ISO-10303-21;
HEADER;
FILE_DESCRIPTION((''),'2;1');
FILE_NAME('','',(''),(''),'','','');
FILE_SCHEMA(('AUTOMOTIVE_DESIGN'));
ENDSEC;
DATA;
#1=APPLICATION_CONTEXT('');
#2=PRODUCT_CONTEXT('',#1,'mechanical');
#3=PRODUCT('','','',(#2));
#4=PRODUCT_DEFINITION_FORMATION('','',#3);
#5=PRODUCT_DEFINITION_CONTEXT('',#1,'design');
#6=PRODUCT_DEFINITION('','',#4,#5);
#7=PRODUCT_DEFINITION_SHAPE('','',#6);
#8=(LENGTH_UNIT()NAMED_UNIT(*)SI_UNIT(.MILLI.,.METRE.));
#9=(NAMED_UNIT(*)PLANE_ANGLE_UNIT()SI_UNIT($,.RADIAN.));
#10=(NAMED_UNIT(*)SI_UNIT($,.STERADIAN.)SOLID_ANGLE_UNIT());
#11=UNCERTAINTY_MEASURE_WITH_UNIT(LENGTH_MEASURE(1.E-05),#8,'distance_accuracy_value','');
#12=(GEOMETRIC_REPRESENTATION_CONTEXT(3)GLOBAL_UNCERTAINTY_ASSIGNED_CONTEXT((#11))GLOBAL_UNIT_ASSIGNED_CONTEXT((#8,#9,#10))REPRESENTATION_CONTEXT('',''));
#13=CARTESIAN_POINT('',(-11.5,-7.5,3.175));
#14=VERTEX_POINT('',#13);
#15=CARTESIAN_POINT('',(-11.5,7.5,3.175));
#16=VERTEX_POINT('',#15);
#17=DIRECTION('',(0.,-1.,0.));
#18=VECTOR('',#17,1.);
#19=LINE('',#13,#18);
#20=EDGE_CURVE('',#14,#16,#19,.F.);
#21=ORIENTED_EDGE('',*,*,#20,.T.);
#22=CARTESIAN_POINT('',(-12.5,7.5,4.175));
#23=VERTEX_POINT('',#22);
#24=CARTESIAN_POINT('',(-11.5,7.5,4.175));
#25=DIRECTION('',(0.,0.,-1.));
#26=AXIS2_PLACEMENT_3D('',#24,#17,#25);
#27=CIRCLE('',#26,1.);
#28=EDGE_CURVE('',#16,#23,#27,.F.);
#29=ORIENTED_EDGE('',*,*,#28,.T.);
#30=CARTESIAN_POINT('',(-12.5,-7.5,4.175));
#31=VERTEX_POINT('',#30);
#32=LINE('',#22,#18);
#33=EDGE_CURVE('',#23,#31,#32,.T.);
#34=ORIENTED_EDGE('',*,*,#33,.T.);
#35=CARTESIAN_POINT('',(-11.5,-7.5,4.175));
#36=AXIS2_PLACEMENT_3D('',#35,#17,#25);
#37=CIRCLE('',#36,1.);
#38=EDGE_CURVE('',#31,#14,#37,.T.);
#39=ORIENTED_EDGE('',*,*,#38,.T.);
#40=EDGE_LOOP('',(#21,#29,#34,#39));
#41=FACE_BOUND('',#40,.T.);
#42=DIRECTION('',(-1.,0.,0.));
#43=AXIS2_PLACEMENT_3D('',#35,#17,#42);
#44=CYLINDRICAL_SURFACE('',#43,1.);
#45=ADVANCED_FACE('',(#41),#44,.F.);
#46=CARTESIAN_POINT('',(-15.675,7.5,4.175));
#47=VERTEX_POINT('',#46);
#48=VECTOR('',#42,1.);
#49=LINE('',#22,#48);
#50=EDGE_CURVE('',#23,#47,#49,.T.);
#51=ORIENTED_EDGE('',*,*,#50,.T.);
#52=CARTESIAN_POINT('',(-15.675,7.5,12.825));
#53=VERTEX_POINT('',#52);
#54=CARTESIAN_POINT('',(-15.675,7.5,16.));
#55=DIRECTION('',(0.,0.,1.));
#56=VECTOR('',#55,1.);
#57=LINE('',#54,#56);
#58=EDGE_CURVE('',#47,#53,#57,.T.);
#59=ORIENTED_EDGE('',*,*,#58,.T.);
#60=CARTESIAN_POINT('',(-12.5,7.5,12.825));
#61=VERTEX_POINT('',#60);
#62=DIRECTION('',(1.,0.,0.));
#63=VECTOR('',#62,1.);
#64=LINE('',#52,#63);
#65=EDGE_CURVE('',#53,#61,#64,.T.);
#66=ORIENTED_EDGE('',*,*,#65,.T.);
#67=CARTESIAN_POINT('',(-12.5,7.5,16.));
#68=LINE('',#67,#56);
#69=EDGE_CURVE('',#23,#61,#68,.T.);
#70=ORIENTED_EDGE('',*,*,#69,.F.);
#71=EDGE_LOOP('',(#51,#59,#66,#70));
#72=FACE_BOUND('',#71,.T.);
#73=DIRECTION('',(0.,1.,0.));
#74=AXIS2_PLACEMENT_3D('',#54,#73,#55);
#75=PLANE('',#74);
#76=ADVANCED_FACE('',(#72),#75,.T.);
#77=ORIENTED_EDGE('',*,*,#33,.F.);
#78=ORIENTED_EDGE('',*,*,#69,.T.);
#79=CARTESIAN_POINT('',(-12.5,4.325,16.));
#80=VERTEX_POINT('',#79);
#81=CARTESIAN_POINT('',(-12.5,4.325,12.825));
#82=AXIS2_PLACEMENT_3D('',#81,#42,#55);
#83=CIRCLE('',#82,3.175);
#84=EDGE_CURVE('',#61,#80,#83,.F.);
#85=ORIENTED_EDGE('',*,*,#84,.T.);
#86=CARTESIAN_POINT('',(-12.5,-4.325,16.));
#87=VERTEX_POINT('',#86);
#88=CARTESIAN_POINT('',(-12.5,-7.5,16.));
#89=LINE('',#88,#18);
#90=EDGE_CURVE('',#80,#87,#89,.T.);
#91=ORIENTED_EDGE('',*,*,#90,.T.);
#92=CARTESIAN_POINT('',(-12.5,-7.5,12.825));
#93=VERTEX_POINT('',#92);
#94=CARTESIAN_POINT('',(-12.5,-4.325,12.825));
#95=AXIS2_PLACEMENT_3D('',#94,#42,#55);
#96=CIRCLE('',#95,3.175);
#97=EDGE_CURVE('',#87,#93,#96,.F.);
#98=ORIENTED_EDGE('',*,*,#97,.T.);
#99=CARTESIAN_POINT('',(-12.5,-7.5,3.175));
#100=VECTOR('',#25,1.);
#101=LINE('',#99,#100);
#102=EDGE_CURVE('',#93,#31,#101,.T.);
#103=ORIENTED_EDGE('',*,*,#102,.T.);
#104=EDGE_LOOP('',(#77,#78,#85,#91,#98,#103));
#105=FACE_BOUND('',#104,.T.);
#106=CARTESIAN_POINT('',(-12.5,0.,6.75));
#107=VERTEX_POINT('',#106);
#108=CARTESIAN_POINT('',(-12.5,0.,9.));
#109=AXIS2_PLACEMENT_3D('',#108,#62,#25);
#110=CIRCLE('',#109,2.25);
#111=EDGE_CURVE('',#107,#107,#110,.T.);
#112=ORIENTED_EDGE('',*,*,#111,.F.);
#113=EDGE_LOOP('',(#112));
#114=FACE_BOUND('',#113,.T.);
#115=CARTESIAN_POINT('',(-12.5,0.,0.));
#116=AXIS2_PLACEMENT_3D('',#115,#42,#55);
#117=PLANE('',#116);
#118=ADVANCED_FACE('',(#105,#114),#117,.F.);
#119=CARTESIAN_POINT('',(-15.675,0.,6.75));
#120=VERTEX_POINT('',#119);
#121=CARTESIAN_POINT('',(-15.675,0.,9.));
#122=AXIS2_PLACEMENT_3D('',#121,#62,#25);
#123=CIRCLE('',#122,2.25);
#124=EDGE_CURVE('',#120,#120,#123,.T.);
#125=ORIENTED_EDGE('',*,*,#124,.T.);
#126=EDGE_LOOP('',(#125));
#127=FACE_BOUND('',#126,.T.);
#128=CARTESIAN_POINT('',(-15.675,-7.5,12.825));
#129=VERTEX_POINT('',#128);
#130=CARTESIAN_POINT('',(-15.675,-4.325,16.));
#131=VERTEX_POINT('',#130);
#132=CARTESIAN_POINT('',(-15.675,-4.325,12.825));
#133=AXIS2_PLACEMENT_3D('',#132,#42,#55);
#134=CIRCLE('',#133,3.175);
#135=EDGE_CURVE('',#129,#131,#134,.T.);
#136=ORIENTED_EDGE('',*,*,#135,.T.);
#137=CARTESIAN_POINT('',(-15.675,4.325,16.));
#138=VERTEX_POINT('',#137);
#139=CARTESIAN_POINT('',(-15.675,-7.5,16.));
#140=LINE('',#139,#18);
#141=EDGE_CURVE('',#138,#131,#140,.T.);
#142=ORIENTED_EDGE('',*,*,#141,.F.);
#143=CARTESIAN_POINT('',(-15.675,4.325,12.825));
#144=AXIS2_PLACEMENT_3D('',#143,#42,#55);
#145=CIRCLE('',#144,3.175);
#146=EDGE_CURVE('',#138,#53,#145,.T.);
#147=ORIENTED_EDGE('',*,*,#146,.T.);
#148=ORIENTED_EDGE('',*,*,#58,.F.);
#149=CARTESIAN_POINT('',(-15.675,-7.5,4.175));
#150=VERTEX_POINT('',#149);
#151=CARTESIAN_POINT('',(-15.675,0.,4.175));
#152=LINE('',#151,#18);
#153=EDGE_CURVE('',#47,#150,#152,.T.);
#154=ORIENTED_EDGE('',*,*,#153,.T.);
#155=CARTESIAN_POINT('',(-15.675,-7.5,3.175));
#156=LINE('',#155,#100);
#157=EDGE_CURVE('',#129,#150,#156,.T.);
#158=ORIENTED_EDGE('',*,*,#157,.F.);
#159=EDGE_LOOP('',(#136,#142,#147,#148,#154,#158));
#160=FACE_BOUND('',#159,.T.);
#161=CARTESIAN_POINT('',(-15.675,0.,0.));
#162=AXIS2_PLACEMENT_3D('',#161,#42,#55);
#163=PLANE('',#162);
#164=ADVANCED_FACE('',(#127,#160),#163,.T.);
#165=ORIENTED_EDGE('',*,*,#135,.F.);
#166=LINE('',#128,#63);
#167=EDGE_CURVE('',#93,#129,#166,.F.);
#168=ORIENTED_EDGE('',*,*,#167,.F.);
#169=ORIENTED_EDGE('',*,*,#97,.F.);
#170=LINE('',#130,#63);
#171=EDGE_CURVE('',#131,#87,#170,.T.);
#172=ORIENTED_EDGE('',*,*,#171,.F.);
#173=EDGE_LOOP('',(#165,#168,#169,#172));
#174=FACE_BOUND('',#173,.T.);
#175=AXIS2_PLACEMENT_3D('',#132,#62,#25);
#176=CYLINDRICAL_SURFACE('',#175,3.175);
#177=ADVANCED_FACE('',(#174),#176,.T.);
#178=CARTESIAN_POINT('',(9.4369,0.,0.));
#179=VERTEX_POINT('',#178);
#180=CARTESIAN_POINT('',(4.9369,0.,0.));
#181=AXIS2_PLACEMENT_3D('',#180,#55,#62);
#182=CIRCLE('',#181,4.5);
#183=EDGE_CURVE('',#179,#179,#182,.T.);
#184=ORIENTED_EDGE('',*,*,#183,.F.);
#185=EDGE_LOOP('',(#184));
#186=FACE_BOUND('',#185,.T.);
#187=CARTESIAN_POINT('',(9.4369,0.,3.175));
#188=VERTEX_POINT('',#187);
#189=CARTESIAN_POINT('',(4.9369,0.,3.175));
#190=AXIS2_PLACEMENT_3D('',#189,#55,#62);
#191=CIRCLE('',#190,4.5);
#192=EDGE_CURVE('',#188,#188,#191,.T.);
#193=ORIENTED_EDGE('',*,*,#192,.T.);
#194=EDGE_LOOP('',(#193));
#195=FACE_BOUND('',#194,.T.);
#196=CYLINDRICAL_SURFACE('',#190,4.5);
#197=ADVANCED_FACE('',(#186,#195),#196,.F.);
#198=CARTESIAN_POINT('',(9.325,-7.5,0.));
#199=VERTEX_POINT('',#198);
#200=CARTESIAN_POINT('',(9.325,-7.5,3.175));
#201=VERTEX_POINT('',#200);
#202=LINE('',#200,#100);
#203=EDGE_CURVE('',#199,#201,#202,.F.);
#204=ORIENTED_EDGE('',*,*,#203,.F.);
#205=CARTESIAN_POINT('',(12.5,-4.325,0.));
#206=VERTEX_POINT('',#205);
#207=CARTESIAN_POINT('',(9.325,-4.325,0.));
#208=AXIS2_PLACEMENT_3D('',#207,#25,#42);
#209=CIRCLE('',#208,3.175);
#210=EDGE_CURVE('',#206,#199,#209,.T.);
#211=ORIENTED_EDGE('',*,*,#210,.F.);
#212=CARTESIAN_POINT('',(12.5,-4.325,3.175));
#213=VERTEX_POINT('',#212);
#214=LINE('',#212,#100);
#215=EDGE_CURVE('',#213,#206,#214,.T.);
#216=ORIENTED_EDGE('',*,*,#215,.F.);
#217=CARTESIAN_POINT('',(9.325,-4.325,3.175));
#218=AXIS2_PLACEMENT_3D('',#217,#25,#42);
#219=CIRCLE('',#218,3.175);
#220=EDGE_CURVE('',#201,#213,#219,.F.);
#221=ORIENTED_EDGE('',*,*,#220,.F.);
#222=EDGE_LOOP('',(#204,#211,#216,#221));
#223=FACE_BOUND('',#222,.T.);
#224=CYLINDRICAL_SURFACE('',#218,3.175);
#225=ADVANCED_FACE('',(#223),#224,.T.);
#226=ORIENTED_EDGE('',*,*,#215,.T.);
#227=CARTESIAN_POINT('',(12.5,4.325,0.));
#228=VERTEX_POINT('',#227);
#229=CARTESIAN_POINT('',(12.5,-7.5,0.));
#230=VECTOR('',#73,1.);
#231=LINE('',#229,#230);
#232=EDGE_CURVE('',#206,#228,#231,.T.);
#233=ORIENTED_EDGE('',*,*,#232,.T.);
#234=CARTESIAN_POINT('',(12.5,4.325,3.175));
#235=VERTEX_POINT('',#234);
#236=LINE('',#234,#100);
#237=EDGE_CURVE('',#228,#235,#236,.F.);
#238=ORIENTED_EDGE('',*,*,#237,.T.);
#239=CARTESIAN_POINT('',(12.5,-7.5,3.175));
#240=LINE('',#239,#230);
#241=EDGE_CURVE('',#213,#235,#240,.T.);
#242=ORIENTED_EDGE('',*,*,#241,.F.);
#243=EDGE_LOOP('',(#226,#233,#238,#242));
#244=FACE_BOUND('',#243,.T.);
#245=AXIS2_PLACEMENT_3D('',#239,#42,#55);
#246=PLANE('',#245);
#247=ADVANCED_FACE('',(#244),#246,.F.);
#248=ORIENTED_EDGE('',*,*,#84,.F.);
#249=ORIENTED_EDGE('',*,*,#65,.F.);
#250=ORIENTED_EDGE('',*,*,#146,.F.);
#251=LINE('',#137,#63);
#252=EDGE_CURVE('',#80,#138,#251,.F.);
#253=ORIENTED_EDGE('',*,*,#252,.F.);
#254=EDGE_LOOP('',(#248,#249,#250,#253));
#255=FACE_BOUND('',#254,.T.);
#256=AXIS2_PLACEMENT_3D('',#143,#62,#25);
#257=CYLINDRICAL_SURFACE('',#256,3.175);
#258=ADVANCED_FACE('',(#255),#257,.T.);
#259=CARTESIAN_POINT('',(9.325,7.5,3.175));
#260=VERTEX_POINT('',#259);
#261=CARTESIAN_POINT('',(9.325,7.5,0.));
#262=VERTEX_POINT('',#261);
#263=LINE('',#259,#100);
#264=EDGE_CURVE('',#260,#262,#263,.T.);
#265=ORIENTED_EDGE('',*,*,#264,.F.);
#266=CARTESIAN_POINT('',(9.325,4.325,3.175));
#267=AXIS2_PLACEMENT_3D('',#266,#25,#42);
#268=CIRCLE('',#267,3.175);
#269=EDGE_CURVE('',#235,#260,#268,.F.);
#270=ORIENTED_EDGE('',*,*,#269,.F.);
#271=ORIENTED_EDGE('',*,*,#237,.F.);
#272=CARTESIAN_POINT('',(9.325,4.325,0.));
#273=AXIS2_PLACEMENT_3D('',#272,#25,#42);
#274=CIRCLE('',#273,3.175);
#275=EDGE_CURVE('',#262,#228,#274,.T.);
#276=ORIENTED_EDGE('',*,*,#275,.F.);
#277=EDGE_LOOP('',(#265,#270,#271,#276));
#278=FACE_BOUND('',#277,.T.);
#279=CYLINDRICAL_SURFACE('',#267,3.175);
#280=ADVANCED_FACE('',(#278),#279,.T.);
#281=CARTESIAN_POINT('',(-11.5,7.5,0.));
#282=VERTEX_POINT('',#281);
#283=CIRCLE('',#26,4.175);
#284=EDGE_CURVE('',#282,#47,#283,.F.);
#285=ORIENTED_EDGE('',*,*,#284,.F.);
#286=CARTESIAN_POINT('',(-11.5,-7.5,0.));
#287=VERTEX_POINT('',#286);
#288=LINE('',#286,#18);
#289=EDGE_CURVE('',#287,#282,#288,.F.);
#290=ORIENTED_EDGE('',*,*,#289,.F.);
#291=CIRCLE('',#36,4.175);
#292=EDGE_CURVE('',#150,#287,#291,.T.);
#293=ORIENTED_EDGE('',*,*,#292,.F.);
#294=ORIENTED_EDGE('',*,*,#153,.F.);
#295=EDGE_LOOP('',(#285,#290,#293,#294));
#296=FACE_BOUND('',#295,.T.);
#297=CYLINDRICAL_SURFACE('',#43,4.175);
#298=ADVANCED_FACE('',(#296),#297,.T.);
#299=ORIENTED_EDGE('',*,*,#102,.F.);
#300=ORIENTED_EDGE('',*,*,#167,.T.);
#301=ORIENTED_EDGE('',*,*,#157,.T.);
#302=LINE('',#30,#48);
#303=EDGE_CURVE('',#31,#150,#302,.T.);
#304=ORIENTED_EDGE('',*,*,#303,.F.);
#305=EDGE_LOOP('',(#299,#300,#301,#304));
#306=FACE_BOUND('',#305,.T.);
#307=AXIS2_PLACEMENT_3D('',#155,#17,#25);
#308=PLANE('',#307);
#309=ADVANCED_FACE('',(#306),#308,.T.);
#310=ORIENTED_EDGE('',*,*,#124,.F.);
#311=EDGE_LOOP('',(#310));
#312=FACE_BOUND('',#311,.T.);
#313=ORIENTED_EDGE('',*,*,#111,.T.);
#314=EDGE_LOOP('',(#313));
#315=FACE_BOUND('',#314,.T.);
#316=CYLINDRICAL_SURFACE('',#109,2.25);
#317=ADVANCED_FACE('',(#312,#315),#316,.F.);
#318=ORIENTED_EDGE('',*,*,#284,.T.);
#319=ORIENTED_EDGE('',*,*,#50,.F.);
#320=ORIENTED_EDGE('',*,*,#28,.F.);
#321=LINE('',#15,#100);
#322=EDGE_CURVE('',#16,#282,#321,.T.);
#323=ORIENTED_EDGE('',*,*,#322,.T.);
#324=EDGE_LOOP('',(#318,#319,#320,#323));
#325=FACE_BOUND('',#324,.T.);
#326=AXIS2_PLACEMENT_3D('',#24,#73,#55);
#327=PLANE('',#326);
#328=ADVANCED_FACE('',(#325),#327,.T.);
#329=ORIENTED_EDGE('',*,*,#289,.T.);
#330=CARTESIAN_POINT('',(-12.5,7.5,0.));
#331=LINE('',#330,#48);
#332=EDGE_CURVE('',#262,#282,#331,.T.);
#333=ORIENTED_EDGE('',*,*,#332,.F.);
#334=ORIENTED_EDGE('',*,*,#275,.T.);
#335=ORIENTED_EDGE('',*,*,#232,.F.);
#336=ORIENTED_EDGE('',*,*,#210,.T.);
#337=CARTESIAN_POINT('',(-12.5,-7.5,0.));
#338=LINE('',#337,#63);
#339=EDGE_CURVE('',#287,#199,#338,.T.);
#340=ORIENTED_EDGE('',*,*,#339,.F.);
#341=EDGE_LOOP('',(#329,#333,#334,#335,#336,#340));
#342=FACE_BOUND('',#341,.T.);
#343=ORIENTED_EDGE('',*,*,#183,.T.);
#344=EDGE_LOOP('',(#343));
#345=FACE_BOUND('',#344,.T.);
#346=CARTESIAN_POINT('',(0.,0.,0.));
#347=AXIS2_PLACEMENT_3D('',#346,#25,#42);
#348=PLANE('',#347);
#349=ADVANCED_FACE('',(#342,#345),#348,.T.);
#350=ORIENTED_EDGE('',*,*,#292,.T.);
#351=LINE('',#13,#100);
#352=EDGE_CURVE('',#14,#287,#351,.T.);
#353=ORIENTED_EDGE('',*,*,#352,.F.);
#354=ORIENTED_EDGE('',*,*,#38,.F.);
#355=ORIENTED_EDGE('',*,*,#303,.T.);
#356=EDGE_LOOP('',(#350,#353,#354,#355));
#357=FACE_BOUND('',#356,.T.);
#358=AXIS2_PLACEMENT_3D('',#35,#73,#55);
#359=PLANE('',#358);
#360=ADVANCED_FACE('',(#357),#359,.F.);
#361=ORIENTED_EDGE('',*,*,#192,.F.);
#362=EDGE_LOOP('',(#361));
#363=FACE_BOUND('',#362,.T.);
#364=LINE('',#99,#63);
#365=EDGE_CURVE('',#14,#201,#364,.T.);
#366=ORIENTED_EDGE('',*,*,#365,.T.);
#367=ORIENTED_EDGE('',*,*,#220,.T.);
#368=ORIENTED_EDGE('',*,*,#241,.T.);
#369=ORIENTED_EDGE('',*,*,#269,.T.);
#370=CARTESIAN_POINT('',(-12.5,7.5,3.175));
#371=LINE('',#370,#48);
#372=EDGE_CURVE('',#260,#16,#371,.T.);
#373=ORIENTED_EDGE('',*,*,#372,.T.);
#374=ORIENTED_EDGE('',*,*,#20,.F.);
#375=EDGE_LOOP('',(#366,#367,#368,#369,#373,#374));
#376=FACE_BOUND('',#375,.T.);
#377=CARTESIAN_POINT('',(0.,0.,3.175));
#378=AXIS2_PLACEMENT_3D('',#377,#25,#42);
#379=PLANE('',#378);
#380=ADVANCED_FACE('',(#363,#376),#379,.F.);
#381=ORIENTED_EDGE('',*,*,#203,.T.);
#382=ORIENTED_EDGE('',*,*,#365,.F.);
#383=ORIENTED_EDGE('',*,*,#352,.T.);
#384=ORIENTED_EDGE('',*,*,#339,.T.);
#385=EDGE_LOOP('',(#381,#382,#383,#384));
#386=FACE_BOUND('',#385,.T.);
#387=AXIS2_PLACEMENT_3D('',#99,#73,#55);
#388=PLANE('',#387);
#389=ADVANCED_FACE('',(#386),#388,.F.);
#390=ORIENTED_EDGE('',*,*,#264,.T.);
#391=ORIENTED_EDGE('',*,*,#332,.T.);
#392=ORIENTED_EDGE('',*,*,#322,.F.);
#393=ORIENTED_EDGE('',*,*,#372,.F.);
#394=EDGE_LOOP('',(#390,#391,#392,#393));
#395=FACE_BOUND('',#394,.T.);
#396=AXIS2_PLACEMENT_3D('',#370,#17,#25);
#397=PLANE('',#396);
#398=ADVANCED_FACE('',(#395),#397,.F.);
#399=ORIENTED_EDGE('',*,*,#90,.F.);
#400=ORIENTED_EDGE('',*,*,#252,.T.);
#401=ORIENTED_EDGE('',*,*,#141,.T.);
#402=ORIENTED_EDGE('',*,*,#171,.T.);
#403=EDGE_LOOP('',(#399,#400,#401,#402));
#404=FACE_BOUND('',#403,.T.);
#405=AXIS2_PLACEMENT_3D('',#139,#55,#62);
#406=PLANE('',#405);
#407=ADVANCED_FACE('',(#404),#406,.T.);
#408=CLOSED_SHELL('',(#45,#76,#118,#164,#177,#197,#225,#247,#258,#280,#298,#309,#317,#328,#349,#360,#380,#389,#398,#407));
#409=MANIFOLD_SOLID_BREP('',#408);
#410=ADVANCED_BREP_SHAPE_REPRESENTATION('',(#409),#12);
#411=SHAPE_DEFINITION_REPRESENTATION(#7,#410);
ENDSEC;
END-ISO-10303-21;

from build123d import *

# Parameters (mm, degrees)
SKETCH1_W                    = 25
SKETCH1_H                    = 15
BASE_FLANGE1_DEPTH           = 3.175
EDGE_FLANGE1_STRIP_W         = 14.7
EDGE_FLANGE1_STRIP_H         = 3.175
EDGE_FLANGE1_STRIP_CUT_DEPTH = 15
EDGE_FLANGE1_DEPTH           = 15
M8_CLEARANCE_HOLE2_D         = 9
FILLET1_R                    = 3.175
M4_CLEARANCE_HOLE2_D         = 4.5


# Sheet-metal steps are written as plain solids
with BuildPart() as part:
    # Sketch1 → Base-Flange1 (new body)
    with BuildSketch(Plane.XY):
        Rectangle(SKETCH1_W, SKETCH1_H)
    extrude(amount=BASE_FLANGE1_DEPTH)

    # Edge-Flange1 strip (across the edge) → Edge-Flange1 strip cut (cut)
    with BuildSketch(Plane(origin=(-12.5, 7.5, 3.175), x_dir=(1, 0, 0), z_dir=(0, -1, 0))):
        with Locations((-6.35, -1.5875)):
            Rectangle(EDGE_FLANGE1_STRIP_W, EDGE_FLANGE1_STRIP_H)
    extrude(amount=EDGE_FLANGE1_STRIP_CUT_DEPTH, mode=Mode.SUBTRACT)

    # Edge-Flange1 section (across the edge) → Edge-Flange1 (add)
    with BuildSketch(Plane(origin=(-12.5, 7.5, 3.175), x_dir=(1, 0, 0), z_dir=(0, -1, 0))):
        with BuildLine():
            Line((-3.175, 1), (-3.175, 12.825))
            Line((-3.175, 12.825), (0, 12.825))
            Line((0, 12.825), (0, 1))
            ThreePointArc((0, 1), (0.292893219, 0.292893219), (1, 0))
            Line((1, 0), (1, -3.175))
            ThreePointArc((1, -3.175), (-1.952170811, -1.952170811), (-3.175, 1))
        make_face()
    extrude(amount=EDGE_FLANGE1_DEPTH)

    # M8 Clearance Hole2 (through all)
    with Locations(Plane.XY.offset(3.175)):
        with Locations((4.9369, 0)):
            Hole(M8_CLEARANCE_HOLE2_D / 2)

    # Fillet1
    fillet1_edges = [part.edges().sort_by_distance(p)[0] for p in [
        (-14.0875, 7.5, 16),
        (-14.0875, -7.5, 16),
        (12.5, -7.5, 1.5875),
        (12.5, 7.5, 1.5875),
    ]]
    fillet(fillet1_edges, radius=FILLET1_R)

    # M4 Clearance Hole2 (through all)
    with Locations(Plane(origin=(-12.5, 0, 0), x_dir=(0, 0, -1), z_dir=(1, 0, 0))):
        with Locations((-9, 0)):
            Hole(M4_CLEARANCE_HOLE2_D / 2)


solid = part.part
